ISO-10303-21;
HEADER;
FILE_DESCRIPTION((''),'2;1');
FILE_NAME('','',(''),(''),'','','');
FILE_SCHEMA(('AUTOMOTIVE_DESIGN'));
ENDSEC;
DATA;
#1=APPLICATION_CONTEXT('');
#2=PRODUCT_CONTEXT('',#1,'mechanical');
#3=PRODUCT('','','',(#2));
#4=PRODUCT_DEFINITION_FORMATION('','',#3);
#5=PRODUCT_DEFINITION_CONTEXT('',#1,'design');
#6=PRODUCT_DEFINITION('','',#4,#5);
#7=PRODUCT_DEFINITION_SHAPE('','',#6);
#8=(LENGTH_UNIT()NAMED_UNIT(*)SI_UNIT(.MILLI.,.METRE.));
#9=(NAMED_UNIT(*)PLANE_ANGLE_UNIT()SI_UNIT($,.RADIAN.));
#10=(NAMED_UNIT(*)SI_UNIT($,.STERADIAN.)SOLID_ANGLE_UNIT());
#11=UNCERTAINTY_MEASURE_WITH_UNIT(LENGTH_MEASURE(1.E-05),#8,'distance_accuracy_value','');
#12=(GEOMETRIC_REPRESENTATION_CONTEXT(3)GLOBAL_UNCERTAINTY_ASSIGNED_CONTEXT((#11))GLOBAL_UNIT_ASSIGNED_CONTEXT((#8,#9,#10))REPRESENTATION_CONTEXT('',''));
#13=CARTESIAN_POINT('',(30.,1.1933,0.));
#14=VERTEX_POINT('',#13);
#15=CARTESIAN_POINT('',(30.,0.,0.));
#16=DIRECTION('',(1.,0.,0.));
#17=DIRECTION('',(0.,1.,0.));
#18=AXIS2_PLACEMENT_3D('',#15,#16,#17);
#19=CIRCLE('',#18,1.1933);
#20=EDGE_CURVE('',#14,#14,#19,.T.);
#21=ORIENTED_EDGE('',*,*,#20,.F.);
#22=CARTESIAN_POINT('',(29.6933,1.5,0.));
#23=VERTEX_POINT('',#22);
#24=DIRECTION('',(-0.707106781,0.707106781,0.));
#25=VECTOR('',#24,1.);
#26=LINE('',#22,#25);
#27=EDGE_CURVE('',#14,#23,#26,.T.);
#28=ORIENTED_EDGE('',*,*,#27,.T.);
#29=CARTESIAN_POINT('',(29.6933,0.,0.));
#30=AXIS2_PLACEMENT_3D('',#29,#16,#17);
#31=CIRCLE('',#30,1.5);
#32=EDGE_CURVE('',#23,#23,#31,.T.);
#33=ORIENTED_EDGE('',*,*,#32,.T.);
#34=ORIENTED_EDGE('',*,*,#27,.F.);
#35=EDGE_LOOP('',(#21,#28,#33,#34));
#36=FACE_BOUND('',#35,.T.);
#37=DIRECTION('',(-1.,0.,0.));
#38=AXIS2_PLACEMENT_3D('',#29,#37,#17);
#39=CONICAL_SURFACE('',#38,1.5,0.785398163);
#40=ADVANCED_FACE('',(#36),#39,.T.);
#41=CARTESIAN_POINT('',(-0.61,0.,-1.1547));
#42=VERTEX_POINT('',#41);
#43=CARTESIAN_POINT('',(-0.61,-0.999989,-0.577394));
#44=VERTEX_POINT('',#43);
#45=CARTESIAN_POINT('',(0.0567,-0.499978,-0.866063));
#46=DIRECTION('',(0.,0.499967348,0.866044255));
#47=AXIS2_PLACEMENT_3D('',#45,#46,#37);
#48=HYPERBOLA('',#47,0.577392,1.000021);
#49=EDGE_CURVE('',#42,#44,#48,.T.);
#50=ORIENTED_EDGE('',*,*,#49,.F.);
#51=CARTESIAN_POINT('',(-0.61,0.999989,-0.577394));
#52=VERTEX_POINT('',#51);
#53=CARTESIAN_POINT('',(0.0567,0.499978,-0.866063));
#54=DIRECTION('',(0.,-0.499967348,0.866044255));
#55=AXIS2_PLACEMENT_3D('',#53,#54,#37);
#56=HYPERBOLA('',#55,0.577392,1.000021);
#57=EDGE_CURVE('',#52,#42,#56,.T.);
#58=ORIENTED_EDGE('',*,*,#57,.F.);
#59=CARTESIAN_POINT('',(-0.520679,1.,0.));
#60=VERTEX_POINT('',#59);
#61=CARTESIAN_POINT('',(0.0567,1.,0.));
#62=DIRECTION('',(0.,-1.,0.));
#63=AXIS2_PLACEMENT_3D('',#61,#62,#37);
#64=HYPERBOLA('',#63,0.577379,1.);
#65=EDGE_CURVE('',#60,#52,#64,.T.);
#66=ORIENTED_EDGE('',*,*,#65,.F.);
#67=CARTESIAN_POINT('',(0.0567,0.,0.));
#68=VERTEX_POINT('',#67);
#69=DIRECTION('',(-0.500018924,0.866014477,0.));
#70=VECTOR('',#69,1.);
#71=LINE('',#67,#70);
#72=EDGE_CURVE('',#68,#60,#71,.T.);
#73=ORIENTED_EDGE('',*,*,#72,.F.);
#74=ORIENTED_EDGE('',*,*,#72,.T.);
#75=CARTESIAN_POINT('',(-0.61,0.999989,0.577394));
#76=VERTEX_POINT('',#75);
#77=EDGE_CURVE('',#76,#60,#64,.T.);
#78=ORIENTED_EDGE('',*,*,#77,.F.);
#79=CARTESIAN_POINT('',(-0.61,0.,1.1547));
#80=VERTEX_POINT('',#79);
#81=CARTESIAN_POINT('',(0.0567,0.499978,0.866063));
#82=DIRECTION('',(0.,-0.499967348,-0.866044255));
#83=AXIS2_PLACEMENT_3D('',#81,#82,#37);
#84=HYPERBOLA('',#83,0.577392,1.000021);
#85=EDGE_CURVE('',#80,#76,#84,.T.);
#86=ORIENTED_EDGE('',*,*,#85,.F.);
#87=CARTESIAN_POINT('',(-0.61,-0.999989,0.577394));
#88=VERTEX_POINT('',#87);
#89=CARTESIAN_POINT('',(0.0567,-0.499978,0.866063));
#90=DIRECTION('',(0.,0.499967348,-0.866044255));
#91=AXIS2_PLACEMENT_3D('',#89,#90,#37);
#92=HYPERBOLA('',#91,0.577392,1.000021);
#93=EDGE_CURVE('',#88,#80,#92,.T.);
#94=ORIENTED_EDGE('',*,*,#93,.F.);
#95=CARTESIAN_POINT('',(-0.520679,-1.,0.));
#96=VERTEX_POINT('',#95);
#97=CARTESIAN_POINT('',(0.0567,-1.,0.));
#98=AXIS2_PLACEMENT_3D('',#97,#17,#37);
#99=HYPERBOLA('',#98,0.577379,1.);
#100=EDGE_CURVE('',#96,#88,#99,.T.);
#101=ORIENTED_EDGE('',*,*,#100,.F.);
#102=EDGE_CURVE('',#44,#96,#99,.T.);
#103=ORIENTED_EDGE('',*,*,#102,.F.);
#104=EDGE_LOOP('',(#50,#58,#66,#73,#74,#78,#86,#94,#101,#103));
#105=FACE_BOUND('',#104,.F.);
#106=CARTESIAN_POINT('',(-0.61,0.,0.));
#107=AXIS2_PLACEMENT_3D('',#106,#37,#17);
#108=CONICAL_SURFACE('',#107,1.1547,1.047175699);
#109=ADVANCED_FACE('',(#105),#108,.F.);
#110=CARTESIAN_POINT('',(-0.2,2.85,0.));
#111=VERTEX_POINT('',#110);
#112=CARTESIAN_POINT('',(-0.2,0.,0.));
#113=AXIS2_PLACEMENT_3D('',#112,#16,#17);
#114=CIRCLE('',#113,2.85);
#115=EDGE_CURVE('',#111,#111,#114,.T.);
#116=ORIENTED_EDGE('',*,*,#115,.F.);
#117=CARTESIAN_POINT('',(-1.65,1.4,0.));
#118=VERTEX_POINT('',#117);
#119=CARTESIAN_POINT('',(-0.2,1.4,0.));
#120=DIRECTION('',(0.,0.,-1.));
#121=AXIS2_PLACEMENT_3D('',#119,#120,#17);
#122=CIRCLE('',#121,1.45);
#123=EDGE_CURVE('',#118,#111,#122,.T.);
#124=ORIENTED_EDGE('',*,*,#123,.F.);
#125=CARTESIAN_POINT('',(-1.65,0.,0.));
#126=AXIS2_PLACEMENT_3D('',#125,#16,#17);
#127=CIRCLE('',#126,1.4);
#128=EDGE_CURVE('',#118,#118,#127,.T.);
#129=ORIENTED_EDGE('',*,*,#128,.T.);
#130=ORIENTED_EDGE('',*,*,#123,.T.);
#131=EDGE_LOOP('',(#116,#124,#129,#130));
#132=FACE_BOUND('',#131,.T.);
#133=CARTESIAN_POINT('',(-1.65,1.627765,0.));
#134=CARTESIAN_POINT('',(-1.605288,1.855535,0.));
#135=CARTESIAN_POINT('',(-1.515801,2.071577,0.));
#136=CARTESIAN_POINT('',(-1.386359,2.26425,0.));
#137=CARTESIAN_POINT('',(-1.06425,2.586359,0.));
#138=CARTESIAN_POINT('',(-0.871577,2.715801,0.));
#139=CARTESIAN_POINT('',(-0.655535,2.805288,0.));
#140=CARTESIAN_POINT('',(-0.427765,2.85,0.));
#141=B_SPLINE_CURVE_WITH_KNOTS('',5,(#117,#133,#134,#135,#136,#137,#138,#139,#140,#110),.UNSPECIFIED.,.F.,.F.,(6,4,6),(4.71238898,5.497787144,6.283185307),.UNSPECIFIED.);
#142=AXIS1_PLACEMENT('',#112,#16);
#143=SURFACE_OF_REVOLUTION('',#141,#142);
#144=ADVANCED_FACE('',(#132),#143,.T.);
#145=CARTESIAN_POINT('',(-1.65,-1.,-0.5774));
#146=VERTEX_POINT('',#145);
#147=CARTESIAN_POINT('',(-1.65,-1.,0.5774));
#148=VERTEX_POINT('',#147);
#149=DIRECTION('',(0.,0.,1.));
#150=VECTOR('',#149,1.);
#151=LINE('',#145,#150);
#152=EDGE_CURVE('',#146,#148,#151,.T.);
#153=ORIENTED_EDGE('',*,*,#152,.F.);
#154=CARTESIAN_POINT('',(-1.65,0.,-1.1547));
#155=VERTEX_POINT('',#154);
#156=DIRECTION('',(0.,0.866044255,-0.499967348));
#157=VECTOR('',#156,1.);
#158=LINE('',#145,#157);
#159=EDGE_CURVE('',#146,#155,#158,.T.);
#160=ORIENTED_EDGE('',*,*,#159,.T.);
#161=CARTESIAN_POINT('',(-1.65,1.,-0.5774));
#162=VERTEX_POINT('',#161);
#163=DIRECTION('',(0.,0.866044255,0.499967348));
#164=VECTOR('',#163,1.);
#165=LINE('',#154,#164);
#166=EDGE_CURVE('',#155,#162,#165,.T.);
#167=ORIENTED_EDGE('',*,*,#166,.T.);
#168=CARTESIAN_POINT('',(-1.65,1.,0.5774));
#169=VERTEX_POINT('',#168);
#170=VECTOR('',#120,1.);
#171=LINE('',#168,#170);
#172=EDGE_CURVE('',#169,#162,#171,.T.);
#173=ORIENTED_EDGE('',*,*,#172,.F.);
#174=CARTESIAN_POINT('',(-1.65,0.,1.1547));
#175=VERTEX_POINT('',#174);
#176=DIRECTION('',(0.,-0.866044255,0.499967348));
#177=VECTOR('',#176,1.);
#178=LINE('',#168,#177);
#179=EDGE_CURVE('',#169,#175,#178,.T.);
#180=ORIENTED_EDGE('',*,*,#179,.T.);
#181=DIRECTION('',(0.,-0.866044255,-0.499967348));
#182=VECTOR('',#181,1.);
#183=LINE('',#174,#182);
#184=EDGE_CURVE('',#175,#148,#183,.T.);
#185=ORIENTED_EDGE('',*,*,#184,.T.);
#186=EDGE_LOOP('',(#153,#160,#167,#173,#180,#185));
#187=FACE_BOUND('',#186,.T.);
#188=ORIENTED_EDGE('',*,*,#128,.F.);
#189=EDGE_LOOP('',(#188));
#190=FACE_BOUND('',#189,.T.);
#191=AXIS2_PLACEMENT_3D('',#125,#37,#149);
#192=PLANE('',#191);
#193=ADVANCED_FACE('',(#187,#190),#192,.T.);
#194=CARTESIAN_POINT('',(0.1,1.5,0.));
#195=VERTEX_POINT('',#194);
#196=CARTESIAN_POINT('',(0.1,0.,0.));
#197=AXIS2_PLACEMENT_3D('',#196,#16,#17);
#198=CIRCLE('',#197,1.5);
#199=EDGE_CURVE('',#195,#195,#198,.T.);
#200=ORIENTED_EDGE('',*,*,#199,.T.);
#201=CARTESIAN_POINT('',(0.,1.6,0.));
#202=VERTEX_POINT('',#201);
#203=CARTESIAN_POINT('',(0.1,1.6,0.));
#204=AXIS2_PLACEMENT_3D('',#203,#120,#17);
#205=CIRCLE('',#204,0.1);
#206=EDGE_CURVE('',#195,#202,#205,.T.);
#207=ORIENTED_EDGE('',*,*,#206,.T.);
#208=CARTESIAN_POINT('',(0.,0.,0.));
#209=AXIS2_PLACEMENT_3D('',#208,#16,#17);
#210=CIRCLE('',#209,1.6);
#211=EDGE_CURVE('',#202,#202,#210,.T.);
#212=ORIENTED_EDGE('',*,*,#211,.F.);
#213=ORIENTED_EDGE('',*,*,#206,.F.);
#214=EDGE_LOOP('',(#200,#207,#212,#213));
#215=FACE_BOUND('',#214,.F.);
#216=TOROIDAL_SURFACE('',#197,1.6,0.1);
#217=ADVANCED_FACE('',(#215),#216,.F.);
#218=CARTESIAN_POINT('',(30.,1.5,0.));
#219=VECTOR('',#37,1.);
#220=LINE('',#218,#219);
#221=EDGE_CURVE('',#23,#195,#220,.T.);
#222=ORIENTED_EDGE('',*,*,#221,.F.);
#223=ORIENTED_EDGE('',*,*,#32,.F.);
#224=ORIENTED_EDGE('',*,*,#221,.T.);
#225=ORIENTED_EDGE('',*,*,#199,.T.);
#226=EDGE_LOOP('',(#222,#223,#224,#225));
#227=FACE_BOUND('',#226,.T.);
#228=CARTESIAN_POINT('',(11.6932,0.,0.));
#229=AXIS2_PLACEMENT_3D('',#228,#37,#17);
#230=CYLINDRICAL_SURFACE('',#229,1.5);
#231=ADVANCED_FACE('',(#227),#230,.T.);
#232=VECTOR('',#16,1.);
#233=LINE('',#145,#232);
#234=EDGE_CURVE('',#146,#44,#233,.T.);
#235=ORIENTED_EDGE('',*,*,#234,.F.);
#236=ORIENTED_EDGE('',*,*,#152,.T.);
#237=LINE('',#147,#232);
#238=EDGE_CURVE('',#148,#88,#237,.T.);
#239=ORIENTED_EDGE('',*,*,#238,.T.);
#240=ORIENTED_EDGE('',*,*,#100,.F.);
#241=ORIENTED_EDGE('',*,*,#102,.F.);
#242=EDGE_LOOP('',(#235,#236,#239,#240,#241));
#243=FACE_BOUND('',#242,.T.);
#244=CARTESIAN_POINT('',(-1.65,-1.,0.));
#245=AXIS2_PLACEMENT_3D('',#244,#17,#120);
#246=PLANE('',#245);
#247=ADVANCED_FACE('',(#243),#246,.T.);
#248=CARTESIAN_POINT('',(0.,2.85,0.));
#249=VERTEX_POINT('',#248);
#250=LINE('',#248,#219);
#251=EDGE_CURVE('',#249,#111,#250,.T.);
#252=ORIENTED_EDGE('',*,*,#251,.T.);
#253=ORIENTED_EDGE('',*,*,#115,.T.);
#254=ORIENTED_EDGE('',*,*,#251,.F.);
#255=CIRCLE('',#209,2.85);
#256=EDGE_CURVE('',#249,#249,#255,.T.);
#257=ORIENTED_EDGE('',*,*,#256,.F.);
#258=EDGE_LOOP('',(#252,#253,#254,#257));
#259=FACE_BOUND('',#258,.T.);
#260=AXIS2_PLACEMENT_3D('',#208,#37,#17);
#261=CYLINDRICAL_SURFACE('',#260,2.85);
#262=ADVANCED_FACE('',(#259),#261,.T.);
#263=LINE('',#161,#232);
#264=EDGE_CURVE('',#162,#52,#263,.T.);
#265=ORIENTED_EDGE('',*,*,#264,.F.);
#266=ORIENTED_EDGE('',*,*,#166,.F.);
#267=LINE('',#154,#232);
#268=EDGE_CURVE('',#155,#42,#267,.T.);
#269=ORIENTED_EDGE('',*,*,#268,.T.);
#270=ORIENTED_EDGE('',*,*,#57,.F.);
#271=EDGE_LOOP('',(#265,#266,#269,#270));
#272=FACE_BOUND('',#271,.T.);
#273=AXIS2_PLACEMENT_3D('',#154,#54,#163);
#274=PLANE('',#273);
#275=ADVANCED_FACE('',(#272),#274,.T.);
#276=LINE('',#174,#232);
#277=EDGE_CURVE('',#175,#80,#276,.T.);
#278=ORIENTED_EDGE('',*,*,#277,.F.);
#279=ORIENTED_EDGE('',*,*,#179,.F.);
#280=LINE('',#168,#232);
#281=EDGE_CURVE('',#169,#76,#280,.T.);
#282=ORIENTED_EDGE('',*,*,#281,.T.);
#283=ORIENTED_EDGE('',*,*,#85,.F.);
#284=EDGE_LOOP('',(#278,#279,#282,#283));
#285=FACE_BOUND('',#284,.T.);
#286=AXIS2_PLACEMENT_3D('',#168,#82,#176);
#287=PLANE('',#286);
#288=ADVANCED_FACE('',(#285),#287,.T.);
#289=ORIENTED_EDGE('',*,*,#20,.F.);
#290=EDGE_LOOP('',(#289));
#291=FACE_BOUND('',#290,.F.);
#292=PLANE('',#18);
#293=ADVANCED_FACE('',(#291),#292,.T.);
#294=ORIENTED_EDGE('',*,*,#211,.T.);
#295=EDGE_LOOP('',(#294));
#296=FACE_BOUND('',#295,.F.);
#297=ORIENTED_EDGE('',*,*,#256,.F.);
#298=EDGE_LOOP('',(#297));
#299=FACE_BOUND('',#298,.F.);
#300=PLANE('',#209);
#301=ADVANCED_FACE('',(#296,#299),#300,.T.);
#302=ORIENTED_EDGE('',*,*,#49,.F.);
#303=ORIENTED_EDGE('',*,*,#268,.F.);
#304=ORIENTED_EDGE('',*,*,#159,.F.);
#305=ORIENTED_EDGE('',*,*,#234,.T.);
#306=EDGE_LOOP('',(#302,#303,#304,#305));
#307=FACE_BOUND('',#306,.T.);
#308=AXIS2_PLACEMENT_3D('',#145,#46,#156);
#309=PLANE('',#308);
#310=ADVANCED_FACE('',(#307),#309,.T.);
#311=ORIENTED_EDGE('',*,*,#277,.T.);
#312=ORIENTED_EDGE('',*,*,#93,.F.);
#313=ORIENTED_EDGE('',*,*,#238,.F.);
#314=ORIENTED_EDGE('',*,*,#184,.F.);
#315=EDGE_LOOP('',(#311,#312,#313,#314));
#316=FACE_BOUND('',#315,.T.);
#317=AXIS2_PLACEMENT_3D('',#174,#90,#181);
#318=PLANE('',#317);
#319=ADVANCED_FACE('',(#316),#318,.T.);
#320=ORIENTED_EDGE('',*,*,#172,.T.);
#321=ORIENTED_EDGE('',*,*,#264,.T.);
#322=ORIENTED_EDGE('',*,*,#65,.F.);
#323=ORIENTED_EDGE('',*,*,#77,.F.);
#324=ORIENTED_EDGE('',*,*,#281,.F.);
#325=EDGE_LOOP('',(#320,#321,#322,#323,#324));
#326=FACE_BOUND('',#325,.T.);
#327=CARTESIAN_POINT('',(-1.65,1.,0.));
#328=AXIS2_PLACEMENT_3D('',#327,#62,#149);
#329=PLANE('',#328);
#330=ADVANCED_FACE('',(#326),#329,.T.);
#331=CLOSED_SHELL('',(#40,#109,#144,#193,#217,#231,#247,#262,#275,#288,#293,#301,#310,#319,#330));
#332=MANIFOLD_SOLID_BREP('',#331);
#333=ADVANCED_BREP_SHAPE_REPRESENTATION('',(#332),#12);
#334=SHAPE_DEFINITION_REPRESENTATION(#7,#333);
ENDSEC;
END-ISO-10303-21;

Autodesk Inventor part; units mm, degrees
ref_plane "YZ Plane" through (0, 0, 0) normal (1, 0, 0) x (0, 1, 0)
ref_plane "XZ Plane" through (0, 0, 0) normal (0, 1, 0) x (-1, 0, 0)
sketch "Sketch1" plane through (0, 0, 0) normal (0, 0, 1) x (1, 0, 0)
  line L0 (0.0567, 0) -> (30, 0)
  line L1 (30, 0) -> (30, 1.5)
  line L2 (30, 1.5) -> (12, 1.5)
  line L3 (12, 1.5) -> (11.6932, 1.5)
  line L4 (11.6932, 1.5) -> (0, 1.5)
  line L5 (0, 1.5) -> (0, 2.85)
  line L6 (0, 2.85) -> (-1.65, 2.85)
  line L7 (-1.65, 2.85) -> (-1.65, 1.1547)
  line L8 (-1.65, 1.1547) -> (-0.61, 1.1547)
  line L9 (-0.61, 1.1547) -> (0.0567, 0)
  line L10 (-7.98, 0) -> (36.33, 0) projected
  line L11 (0, -0.57) -> (0, 3.42) projected
  line L12 (12, 1.5) -> (0, 1.5) construction
  dimension "d1" = 18
  dimension "d2" = 0.3068
  dimension "d3" = 1.65
  dimension "d4" = 1.04
  dimension "d5" = 60
  dimension "d6" = 3
  dimension "d7" = 3
  dimension "d8" = 2.3094
  dimension "d9" = 5.7
  dimension "d26" = 30
revolve "Body" add sketch "Sketch1" angle 360 about axis through (0.0567, 0, 0) along (1, 0, 0) contours L9 L11 L4 L3 L2 L1 L0 | L9 L8 L7 L6 L5 L11
sketch "Sketch2" plane through (-1.65, 0, 0) normal (-1, 0, 0) x (0, 0, 1)
  circle A0 centre (0, 0) radius 1.1547 projected
  line L0 (0, -3.99) -> (0, 3.99) projected
  line L1 (-3.99, 0) -> (3.99, 0) projected
  line L2 (1.1547, 0) -> (0.5774, -1)
  line L3 (0.5774, -1) -> (-0.5774, -1)
  line L4 (-0.5774, -1) -> (-1.1547, 0)
  line L5 (-1.1547, 0) -> (-0.5774, 1)
  line L6 (-0.5774, 1) -> (0.5774, 1)
  line L7 (0.5774, 1) -> (1.1547, 0)
extrude "Slot" add sketch "Sketch2" against normal up to next contours L7 A0 | A0 L2 | L6 L0 A0 | A0 L0 L3 | L0 L6 A0 | A0 L3 L0 | L4 A0 | A0 L5
fillet "Fillet1" radius 1.45 1 edges at (-1.65, -2.85, 0)
thread "Thread" size "M3x0.5" class "6g" standard "ISO Metric profile" length 18
chamfer "Chamfer1" distance 0.3067 distance2 0.3067 1 edges at (30, -1.5, 0) measured on face at (30, -0.3888, 0.2119)
ref_plane "Work Plane1" through (29, 0, 0) normal (0, -1, 0) x (1, 0, 0)
fillet "Fillet2" radius 0.1 1 edges at (0, -1.5, 0)
equation "\"d30\" = R"
equation "\"d17\" = RR"
equation "\"d13\" = GEL"
equation "\"d15\" = -0.5 * SPD + 0.5 * GD"
equation "\"d16\" = GUL"
equation "\"d1\" = GEL"
equation "\"d3\" = KOH"
equation "\"d4\" = INTI"
equation "\"d6\" = GD"
equation "\"d7\" = BDM"
equation "\"d8\" = 1.1547 * SW"
equation "\"d9\" = KOD"
equation "\"d26\" = NLG"
equation "\"GD\" = NND"
equation "\"NLG\" = 30"
equation "\"GEL\" = 18"
equation "\"KOD\" = 5.7"
equation "\"KOH\" = 1.65"
equation "\"INTI\" = 1.04"
equation "\"GAL\" = 0.61345 * PTC"
equation "\"GUL\" = 0.61345 * PTC"
equation "\"BDM\" = NND"
equation "\"SW\" = 2"
equation "\"RR\" = 1.45"
equation "\"SPD\" = NND - 1.2269 * PTC"
equation "\"R\" = 0.1"
equation "\"TOA\" = 30deg"
equation "\"GD1\" = THREADDIA - 1.2269 * PTC"
equation "\"THREADDIA\" = 3"
equation "\"PTC\" = 0.5"
equation "\"NND\" = 3"
equation "\"KOH1\" = 0.2"
equation "\"E0\" = 2.303"
properties part number "ISO 7380-1 - M3 x 30" material "Steel"
